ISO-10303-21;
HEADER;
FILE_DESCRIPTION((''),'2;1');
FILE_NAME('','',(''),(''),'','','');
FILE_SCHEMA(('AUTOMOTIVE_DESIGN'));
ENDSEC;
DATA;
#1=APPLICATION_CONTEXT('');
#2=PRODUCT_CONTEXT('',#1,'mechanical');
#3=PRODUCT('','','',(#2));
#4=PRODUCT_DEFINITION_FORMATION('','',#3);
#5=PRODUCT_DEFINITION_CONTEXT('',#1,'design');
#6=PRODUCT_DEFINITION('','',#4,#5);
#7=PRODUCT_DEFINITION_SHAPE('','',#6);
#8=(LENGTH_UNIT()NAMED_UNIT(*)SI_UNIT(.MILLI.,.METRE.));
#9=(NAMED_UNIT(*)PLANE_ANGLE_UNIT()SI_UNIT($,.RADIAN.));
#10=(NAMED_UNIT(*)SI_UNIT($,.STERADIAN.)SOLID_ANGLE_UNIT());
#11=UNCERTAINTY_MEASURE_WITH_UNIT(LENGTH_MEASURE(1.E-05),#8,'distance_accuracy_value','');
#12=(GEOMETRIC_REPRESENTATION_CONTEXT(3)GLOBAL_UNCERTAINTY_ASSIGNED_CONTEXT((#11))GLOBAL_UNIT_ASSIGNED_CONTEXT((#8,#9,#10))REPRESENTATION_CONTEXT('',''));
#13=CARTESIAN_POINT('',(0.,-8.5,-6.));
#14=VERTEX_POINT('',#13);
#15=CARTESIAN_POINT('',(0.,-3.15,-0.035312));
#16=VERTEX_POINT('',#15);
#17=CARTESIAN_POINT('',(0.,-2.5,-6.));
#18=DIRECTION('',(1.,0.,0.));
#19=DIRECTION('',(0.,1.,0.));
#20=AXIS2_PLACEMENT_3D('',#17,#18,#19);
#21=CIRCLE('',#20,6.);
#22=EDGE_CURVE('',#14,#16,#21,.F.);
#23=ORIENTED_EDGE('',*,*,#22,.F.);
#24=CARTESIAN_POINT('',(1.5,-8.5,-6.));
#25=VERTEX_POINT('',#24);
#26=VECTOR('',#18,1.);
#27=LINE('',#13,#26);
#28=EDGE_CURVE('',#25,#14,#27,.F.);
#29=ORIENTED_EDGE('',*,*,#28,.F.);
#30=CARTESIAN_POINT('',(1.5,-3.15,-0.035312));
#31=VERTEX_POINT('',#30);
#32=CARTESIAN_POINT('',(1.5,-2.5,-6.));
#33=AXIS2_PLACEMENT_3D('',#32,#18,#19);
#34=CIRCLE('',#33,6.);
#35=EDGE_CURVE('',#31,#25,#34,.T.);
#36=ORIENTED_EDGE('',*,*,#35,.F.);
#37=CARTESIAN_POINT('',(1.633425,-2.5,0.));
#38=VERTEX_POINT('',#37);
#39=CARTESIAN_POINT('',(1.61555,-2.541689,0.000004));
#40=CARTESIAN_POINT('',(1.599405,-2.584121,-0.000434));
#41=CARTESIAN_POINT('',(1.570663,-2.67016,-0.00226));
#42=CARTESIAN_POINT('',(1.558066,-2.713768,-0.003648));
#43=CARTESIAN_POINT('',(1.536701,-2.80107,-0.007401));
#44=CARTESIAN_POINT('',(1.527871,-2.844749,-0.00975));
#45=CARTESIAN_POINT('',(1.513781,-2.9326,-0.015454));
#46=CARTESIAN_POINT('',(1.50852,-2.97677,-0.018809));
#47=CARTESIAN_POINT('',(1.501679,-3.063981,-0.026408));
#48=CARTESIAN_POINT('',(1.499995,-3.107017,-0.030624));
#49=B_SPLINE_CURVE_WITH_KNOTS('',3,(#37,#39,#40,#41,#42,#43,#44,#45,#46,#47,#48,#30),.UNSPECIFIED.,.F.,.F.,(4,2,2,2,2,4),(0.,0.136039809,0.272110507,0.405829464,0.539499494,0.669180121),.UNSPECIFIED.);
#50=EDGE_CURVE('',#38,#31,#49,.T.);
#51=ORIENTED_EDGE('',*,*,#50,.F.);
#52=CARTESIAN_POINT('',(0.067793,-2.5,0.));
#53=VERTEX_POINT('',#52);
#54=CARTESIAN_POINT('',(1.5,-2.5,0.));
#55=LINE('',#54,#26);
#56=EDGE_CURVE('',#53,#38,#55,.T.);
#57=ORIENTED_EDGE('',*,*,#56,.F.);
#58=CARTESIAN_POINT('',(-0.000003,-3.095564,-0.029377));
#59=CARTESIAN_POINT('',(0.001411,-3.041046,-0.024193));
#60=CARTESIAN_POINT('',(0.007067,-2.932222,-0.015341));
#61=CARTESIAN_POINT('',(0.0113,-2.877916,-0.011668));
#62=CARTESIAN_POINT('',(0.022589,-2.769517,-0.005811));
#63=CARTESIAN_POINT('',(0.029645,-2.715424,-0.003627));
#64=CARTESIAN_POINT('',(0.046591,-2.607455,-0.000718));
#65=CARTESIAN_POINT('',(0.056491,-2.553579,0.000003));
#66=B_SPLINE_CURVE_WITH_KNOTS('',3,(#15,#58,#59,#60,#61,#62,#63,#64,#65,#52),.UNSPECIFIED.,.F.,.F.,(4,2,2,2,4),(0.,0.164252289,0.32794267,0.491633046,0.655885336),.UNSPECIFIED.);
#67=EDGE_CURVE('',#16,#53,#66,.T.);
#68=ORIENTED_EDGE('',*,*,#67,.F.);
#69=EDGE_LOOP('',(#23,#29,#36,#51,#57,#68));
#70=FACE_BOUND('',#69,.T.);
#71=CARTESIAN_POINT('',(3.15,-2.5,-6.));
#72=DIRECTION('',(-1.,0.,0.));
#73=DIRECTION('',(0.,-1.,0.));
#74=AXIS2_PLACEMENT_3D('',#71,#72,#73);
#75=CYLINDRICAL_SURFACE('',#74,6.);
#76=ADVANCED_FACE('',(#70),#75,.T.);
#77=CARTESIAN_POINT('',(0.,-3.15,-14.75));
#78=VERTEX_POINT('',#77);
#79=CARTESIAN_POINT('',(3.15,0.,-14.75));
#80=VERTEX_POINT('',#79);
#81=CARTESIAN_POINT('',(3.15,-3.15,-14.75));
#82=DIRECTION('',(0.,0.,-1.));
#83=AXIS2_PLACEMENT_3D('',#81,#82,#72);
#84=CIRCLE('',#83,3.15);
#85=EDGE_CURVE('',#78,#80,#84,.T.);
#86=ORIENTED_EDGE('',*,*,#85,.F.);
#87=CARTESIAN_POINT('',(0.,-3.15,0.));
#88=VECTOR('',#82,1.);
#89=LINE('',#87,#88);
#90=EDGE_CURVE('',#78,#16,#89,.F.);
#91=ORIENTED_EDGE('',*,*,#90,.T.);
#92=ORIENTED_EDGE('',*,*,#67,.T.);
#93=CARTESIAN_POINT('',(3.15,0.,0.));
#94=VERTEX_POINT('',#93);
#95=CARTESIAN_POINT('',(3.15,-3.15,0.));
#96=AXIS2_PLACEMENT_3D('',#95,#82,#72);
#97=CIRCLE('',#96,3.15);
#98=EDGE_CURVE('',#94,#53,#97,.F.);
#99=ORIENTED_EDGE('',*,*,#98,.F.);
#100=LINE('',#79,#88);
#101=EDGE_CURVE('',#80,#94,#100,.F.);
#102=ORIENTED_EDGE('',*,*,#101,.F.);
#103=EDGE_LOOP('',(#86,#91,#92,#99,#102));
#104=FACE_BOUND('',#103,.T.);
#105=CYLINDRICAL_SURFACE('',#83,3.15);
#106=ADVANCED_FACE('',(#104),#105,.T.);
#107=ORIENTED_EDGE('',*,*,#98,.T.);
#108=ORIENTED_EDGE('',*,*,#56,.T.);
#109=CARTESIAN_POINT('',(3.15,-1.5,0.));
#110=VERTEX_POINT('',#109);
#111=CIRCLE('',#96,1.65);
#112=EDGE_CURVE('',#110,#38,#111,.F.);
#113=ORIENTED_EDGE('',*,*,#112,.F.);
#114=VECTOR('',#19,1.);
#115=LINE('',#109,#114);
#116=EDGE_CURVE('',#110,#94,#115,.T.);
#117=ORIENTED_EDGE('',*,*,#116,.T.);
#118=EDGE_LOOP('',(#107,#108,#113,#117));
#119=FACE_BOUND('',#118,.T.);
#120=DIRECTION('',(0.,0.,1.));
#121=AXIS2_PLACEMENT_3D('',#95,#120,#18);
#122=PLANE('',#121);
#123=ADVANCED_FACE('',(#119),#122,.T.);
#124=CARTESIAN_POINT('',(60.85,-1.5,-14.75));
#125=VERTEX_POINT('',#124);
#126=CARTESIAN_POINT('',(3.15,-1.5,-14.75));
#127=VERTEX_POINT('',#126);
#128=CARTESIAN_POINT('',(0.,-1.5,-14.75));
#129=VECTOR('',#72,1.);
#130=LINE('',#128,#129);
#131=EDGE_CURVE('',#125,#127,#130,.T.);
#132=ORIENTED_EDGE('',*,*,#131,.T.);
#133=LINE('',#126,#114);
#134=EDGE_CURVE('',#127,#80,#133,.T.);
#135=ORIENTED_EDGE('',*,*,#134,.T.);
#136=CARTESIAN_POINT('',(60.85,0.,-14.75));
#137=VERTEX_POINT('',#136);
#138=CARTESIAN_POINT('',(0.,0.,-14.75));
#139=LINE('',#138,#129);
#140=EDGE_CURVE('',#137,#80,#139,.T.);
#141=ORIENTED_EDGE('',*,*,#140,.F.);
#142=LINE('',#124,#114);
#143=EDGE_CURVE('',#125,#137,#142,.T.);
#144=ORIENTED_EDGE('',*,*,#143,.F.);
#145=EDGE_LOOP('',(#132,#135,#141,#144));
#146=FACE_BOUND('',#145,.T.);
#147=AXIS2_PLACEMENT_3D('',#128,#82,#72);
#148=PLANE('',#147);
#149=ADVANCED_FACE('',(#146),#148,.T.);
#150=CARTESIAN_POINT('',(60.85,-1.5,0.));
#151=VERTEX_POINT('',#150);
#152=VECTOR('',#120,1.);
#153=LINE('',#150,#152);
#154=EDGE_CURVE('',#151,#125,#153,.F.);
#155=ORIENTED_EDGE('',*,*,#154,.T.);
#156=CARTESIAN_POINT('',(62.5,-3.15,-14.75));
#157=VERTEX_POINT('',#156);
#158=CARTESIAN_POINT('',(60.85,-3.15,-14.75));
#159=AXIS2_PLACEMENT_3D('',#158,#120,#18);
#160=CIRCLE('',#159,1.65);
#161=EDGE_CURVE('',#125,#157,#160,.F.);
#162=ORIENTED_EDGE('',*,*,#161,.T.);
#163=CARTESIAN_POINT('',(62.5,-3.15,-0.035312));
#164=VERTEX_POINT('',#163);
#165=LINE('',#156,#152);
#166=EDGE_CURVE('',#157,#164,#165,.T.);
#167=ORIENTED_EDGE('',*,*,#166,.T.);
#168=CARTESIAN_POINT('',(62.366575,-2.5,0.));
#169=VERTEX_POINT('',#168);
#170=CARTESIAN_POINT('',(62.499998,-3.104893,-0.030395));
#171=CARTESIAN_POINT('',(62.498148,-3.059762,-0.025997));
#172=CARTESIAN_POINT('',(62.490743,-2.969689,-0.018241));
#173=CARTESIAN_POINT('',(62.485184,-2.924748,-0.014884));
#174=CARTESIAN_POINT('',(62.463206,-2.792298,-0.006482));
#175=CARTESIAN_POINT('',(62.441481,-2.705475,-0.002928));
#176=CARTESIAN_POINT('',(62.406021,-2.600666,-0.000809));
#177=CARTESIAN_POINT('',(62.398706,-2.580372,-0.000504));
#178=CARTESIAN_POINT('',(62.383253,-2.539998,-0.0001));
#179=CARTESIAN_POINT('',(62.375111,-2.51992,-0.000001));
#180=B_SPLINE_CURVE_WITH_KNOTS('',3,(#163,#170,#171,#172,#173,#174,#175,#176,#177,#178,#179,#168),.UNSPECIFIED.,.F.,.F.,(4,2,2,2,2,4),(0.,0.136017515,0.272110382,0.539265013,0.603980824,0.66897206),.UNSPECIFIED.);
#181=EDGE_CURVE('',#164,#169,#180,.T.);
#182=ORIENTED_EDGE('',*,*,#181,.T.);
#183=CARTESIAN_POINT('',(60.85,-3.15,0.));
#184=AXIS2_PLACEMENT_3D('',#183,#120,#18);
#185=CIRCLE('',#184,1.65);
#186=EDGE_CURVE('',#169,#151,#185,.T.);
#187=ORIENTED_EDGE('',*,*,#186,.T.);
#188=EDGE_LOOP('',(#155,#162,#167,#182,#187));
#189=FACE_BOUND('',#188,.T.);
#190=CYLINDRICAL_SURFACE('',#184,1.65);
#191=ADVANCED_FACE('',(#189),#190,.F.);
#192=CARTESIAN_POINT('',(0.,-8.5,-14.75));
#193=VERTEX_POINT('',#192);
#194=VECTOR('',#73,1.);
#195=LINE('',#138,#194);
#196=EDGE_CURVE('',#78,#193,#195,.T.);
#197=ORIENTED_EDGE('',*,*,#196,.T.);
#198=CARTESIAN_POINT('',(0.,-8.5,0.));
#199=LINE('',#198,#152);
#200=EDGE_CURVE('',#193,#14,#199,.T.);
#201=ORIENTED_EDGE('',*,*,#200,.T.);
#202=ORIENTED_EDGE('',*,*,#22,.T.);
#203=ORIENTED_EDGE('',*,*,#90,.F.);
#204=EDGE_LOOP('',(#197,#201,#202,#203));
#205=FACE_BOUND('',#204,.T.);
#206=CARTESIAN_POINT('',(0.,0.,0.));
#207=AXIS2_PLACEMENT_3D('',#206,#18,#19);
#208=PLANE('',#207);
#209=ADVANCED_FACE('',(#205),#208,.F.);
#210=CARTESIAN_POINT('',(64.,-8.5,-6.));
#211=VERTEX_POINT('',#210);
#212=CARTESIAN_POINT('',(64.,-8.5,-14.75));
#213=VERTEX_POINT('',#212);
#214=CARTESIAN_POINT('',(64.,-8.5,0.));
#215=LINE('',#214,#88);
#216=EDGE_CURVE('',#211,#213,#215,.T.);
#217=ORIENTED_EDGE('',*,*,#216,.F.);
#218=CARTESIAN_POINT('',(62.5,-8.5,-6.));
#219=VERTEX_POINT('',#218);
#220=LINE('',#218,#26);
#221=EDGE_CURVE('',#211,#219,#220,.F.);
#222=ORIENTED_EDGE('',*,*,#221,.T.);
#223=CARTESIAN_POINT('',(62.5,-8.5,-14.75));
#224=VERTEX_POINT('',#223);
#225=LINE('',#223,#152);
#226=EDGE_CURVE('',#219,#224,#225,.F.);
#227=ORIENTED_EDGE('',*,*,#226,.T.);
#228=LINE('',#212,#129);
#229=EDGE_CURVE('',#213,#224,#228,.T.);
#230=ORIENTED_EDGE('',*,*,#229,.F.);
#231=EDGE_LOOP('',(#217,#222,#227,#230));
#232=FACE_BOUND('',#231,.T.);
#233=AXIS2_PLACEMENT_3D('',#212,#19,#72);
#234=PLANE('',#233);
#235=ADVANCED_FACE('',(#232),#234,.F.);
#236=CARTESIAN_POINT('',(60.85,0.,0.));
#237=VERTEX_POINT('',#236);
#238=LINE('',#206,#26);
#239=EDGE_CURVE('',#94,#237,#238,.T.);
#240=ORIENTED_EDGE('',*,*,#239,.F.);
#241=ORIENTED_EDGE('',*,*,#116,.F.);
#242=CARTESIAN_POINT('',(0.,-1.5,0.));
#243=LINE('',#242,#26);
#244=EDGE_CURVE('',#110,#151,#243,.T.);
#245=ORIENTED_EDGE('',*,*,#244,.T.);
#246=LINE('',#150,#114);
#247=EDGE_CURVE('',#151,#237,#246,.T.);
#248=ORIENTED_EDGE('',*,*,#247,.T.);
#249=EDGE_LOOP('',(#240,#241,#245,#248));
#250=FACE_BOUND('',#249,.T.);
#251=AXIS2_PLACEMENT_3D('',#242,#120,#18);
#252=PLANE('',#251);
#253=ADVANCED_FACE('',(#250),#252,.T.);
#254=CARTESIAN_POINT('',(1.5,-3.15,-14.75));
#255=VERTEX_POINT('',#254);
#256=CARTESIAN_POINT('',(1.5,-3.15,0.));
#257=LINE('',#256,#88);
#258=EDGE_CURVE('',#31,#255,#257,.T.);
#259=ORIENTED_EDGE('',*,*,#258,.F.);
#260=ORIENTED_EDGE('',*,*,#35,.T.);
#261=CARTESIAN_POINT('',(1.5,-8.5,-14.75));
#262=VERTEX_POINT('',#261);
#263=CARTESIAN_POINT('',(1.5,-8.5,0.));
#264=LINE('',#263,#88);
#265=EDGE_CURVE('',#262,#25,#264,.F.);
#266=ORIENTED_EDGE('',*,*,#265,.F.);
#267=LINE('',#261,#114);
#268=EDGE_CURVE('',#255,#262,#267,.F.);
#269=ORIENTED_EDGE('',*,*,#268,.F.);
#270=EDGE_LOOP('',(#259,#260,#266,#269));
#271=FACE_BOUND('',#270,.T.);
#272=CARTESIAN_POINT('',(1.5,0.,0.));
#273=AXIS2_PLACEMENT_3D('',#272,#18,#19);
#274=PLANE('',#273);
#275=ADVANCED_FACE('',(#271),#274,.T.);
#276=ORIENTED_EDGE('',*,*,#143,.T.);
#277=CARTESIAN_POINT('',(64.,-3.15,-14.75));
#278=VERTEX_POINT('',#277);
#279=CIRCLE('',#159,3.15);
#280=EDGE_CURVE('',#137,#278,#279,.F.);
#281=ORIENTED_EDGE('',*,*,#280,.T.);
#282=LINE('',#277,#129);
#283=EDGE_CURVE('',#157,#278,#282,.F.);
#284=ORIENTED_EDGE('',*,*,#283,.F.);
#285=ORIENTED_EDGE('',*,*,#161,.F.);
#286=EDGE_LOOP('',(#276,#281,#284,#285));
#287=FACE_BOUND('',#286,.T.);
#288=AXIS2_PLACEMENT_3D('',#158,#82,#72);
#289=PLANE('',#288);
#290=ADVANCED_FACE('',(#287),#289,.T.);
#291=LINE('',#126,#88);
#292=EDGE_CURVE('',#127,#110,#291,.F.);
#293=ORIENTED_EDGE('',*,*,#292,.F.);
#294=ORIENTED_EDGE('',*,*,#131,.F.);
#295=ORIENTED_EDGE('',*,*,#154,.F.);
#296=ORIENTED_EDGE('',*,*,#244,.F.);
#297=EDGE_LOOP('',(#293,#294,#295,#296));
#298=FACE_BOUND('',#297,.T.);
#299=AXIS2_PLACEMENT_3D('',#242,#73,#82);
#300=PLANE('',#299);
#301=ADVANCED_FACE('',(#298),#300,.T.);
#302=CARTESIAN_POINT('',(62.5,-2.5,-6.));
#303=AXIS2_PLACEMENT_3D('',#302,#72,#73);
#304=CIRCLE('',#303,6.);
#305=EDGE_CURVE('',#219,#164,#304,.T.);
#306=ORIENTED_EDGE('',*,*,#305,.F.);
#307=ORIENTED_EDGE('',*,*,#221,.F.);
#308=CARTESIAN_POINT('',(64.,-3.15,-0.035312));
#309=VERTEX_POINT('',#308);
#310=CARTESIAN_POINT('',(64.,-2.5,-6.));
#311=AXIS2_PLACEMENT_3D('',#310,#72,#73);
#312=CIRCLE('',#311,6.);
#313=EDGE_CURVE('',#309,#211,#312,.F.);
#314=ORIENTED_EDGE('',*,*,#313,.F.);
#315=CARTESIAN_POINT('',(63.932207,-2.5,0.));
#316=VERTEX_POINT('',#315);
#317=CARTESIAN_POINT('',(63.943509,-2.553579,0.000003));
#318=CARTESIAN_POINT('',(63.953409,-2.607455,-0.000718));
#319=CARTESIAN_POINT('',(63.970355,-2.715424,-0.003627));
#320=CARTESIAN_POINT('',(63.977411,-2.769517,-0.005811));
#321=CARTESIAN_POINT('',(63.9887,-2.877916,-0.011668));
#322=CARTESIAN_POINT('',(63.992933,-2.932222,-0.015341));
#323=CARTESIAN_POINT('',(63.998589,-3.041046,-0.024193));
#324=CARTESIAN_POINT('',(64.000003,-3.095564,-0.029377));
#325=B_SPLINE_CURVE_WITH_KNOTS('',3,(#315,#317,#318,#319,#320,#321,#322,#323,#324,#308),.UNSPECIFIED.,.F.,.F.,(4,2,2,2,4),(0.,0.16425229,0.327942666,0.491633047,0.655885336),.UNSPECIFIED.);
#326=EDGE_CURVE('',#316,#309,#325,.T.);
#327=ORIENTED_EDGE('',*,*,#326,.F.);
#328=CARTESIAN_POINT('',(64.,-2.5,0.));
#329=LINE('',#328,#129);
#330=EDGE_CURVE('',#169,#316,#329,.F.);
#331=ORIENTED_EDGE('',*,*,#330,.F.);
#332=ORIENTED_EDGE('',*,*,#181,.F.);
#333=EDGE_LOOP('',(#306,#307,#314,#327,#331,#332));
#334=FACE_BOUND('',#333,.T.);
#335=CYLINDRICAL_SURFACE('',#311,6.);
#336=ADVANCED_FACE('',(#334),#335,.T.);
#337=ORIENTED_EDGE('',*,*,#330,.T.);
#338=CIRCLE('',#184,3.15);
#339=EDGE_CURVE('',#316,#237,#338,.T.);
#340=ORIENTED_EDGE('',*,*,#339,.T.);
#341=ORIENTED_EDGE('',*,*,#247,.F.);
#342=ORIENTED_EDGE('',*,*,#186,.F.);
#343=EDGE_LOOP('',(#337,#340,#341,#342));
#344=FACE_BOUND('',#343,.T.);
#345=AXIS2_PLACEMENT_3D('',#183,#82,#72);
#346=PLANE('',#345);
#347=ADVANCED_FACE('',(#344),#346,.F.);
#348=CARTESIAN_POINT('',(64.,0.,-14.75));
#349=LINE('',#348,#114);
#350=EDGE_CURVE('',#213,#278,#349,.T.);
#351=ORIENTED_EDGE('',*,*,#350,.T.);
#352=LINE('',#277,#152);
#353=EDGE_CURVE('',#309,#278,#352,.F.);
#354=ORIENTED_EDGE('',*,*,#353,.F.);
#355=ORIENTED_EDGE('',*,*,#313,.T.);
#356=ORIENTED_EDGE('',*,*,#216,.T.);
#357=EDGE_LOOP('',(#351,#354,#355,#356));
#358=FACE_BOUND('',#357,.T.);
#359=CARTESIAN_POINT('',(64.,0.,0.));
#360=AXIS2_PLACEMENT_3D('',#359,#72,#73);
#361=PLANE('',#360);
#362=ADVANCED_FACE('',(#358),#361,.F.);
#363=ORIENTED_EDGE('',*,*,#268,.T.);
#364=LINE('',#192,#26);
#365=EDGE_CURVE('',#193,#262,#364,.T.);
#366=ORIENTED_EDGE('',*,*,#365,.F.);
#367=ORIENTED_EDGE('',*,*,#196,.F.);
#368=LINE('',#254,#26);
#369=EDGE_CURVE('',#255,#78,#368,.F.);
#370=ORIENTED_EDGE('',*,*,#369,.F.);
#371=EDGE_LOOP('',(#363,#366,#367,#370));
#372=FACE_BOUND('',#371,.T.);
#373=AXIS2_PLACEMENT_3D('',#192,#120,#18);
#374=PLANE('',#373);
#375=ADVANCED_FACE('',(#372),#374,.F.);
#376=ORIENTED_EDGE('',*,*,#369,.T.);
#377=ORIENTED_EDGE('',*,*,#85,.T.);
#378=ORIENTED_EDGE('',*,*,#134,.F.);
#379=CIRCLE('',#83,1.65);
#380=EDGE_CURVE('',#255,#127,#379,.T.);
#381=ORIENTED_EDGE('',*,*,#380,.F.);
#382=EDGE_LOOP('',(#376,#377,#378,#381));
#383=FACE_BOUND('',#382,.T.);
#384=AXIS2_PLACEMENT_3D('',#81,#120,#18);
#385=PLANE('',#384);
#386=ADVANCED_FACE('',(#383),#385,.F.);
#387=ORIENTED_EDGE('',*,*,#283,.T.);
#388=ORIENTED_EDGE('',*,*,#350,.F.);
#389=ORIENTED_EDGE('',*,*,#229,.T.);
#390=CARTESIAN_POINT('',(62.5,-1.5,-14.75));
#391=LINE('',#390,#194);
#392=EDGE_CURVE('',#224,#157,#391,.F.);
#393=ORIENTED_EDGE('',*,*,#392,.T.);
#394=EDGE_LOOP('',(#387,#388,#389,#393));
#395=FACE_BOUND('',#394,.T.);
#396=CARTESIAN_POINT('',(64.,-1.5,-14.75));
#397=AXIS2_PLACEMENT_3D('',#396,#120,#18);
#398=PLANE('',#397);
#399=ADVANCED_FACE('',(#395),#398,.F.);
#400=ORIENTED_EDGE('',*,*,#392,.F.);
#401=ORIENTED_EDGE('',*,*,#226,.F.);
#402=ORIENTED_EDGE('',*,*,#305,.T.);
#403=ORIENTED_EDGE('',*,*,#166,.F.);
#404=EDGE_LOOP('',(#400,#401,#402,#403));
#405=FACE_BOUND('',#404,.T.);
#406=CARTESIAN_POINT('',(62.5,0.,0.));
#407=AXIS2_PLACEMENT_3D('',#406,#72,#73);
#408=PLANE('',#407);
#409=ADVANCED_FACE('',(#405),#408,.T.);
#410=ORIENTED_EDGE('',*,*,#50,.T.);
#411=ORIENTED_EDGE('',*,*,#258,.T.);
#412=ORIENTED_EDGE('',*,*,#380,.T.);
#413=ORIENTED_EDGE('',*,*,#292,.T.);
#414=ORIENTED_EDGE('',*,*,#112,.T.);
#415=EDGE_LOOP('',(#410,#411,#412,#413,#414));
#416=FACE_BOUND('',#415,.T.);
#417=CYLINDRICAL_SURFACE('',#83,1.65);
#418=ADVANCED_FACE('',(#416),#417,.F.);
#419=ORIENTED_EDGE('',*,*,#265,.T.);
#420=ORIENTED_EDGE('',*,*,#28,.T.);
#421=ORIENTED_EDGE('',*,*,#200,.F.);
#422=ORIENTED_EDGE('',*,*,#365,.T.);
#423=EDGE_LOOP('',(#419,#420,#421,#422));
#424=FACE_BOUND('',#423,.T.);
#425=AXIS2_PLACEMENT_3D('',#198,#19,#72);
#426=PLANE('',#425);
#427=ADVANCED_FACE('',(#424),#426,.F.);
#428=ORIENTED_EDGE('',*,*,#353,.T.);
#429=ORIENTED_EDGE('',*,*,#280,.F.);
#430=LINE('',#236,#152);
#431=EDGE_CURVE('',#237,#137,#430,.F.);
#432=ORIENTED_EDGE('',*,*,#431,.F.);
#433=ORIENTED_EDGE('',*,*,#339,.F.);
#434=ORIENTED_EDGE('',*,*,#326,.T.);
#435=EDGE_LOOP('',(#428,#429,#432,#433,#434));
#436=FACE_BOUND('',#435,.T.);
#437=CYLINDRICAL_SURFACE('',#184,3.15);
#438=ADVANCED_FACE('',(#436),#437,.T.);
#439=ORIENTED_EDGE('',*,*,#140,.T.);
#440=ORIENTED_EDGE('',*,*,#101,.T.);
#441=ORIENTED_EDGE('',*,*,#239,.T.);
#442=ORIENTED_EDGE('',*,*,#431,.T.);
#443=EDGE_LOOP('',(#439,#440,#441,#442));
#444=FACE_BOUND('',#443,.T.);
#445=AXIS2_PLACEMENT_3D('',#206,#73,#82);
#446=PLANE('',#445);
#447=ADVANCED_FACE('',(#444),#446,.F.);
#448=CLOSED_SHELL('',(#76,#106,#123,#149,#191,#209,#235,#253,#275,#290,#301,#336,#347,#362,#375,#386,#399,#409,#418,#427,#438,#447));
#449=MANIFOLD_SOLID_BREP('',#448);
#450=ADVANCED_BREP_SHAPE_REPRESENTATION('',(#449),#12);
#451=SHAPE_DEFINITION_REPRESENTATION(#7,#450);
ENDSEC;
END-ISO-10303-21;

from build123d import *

# Parameters (mm, degrees)
SKETCH1_W                      = 64
SKETCH1_H                      = 14.75
BASE_FLANGE1_DEPTH             = 1.5
EDGE_FLANGE1_STRIP_W           = 9.3
EDGE_FLANGE1_STRIP_H           = 1.5
EDGE_FLANGE1_STRIP_CUT_DEPTH   = 14.75
EDGE_FLANGE1_STRIP_2_W         = 9.3
EDGE_FLANGE1_STRIP_2_H         = 1.5
EDGE_FLANGE1_STRIP_CUT_2_DEPTH = 14.75
EDGE_FLANGE1_DEPTH             = 14.75
EDGE_FLANGE1_BEND_DEPTH        = 14.75
FILLET1_R                      = 6


# Sheet-metal steps are written as plain solids
with BuildPart() as part:
    # Sketch1 → Base-Flange1 (new body)
    with BuildSketch(Plane(origin=(0, 0, 0), x_dir=(1, 0, 0), z_dir=(0, 1, 0))):
        with Locations((32, 7.375)):
            Rectangle(SKETCH1_W, SKETCH1_H)
    extrude(amount=-BASE_FLANGE1_DEPTH)

    # Edge-Flange1 strip (across the edge) → Edge-Flange1 strip cut (cut)
    with BuildSketch(Plane(origin=(0, -1.5, 0), x_dir=(1, 0, 0), z_dir=(0, 0, -1))):
        with Locations((-1.5, -0.75)):
            Rectangle(EDGE_FLANGE1_STRIP_W, EDGE_FLANGE1_STRIP_H)
    extrude(amount=EDGE_FLANGE1_STRIP_CUT_DEPTH, mode=Mode.SUBTRACT)

    # Edge-Flange1 strip 2 (across the edge) → Edge-Flange1 strip cut 2 (cut)
    with BuildSketch(Plane(origin=(64, -1.5, -14.75), x_dir=(-1, 0, 0), z_dir=(0, 0, 1))):
        with Locations((-1.5, -0.75)):
            Rectangle(EDGE_FLANGE1_STRIP_2_W, EDGE_FLANGE1_STRIP_2_H)
    extrude(amount=EDGE_FLANGE1_STRIP_CUT_2_DEPTH, mode=Mode.SUBTRACT)

    # Edge-Flange1 section (across the edge) → Edge-Flange1 (add)
    with BuildSketch(Plane(origin=(0, -1.5, 0), x_dir=(1, 0, 0), z_dir=(0, 0, -1))):
        with BuildLine():
            Line((0, 1.65), (0, 7))
            Line((0, 7), (1.5, 7))
            Line((1.5, 7), (1.5, 1.65))
            ThreePointArc((1.5, 1.65), (1.983273811, 0.483273811), (3.15, 0))
            Line((3.15, 0), (3.15, -1.5))
            ThreePointArc((3.15, -1.5), (0.922613639, -0.577386361), (0, 1.65))
        make_face()
    extrude(amount=EDGE_FLANGE1_DEPTH)

    # Edge-Flange1 section 2 (across the edge) → Edge-Flange1 bend (add)
    with BuildSketch(Plane(origin=(64, -1.5, -14.75), x_dir=(-1, 0, 0), z_dir=(0, 0, 1))):
        with BuildLine():
            Line((0, 1.65), (0, 7))
            Line((0, 7), (1.5, 7))
            Line((1.5, 7), (1.5, 1.65))
            ThreePointArc((1.5, 1.65), (1.983273811, 0.483273811), (3.15, 0))
            Line((3.15, 0), (3.15, -1.5))
            ThreePointArc((3.15, -1.5), (0.922613639, -0.577386361), (0, 1.65))
        make_face()
    extrude(amount=EDGE_FLANGE1_BEND_DEPTH)

    # Fillet1
    fillet1_edges = [part.edges().sort_by_distance(p)[0] for p in [
        (0.75, -8.5, 0),
        (63.25, -8.5, 0),
    ]]
    fillet(fillet1_edges, radius=FILLET1_R)


solid = part.part
